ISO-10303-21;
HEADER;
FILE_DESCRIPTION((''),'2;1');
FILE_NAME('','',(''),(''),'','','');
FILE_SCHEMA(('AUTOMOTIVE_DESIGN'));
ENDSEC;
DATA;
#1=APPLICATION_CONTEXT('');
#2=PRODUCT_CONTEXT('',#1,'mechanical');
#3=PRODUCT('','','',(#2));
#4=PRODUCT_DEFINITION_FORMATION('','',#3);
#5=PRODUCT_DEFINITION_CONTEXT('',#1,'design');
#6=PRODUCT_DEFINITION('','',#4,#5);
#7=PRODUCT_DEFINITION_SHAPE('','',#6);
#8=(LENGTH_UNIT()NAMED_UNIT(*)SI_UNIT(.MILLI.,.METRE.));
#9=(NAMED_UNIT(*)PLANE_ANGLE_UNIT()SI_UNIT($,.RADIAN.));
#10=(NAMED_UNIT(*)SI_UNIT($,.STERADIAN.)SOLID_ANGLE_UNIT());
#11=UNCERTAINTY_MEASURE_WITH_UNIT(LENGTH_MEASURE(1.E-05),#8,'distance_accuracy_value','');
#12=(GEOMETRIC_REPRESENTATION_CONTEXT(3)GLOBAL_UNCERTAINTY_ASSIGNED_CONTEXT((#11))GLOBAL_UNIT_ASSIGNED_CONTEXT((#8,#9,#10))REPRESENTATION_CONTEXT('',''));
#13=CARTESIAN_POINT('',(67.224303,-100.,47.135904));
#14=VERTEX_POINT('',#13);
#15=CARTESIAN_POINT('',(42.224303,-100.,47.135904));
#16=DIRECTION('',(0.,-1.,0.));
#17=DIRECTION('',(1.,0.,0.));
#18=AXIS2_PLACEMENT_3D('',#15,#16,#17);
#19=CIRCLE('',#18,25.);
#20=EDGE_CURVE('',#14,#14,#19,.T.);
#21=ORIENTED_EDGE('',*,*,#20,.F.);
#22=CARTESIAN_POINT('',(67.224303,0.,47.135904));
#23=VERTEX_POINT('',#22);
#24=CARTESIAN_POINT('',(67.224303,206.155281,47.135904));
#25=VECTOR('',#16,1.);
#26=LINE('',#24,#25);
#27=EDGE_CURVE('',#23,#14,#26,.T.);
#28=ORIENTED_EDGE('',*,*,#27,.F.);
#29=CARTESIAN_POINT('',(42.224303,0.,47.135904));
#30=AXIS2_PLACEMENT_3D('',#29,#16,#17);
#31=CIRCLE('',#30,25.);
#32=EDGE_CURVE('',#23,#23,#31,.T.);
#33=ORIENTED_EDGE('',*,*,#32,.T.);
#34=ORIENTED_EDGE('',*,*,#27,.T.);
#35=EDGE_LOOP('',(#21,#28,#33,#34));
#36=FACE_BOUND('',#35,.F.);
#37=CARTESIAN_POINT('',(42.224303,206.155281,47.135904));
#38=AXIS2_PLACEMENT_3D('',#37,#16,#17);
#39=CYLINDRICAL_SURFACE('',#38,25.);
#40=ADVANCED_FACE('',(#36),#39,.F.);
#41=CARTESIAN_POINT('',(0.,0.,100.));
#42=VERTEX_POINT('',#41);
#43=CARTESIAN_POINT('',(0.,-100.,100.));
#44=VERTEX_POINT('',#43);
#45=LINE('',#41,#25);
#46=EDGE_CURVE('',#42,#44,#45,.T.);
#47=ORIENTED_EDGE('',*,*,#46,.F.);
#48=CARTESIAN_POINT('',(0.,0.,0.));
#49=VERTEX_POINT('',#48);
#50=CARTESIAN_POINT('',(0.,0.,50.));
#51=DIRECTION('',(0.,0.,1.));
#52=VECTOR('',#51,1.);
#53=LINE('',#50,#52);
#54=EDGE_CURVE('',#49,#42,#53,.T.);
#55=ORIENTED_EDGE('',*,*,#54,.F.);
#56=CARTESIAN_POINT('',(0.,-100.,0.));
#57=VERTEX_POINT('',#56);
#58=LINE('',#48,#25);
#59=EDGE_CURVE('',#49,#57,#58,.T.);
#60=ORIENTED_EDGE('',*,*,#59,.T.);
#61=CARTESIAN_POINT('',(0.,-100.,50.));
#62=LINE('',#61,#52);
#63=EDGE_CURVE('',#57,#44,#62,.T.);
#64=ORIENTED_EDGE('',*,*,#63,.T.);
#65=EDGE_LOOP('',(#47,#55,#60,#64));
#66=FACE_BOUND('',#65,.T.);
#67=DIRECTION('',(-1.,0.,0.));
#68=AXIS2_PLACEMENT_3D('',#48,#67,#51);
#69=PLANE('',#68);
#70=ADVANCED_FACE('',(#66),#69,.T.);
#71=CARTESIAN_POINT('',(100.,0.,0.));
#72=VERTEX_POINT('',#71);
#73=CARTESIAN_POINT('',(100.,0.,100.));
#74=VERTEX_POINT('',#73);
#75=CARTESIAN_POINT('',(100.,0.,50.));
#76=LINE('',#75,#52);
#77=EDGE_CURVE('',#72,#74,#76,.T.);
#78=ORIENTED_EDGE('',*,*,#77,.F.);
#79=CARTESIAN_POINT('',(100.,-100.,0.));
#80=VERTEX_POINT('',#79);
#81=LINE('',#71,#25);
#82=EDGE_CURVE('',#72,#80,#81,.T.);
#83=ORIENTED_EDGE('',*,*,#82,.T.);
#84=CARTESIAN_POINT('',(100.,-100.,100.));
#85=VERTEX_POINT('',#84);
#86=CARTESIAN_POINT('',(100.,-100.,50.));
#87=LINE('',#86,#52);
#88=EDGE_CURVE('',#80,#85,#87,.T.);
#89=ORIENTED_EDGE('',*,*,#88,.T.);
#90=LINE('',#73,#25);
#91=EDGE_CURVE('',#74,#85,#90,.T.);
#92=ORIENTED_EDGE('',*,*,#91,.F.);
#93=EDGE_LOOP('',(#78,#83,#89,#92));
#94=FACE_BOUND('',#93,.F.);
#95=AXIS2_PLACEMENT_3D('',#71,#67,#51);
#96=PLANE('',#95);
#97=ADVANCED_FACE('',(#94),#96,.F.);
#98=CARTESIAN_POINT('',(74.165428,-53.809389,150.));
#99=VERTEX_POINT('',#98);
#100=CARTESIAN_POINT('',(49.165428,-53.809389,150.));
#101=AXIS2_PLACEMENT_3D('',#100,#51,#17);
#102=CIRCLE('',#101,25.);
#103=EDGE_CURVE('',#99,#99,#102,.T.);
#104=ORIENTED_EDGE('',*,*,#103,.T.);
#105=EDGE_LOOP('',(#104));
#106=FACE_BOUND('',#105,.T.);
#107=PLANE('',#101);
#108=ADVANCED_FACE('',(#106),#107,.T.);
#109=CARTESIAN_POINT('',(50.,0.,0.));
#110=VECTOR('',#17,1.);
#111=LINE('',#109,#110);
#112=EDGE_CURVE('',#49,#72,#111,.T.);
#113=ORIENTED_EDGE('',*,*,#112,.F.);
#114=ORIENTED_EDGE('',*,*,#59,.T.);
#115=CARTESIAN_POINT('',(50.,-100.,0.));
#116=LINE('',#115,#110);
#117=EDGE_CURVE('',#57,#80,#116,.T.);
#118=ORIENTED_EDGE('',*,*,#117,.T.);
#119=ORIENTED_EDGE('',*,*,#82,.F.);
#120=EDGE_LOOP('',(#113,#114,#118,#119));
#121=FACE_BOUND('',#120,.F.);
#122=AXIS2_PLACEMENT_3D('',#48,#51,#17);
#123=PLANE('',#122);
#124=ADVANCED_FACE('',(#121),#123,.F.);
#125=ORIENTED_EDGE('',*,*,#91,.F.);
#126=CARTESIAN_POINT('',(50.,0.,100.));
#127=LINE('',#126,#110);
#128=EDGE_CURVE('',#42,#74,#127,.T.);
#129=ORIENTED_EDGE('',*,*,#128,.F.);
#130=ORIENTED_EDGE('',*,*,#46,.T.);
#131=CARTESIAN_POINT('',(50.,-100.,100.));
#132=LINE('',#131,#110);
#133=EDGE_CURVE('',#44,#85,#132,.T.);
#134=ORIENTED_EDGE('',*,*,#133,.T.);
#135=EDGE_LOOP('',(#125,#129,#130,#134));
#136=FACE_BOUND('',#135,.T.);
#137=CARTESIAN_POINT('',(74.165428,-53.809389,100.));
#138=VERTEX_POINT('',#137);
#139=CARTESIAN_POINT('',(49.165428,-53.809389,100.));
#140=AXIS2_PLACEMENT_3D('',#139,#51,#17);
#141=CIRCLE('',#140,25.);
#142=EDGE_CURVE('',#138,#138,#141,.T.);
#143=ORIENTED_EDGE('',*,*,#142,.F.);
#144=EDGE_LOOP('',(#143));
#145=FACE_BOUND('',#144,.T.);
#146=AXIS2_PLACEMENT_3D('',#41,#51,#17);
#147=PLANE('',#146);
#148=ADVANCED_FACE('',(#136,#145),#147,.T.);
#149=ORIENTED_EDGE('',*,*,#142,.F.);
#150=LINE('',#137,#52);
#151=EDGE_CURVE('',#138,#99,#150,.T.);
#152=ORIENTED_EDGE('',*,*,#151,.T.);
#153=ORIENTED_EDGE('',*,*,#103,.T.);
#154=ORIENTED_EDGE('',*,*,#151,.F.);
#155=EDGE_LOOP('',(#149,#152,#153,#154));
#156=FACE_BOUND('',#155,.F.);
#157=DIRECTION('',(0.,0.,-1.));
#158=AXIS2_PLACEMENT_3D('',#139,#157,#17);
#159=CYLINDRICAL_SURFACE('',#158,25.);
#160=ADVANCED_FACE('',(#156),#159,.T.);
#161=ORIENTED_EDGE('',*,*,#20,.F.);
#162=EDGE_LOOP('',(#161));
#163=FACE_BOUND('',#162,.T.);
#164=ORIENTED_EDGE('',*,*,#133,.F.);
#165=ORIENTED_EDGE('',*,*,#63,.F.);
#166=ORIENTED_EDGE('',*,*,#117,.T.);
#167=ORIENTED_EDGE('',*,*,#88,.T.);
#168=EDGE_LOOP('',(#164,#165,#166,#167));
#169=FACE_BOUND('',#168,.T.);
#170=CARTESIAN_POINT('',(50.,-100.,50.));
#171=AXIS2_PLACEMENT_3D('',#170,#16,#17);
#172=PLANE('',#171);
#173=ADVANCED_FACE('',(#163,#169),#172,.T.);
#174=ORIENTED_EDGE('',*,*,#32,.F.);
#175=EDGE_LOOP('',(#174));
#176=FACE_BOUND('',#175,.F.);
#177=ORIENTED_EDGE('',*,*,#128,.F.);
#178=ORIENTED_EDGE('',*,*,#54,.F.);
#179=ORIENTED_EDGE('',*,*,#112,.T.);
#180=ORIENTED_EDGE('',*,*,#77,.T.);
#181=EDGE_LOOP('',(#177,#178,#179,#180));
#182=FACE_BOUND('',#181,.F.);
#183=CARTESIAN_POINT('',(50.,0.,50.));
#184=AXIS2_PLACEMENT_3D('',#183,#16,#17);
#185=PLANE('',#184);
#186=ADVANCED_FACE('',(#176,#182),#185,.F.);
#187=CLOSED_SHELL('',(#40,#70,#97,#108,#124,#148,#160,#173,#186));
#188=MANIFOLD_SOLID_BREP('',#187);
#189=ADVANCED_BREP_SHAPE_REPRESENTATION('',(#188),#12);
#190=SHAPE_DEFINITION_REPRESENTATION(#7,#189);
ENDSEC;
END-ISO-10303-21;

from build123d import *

# Parameters (mm, degrees)
F0_W     = 100
F0_H     = 100
F1_DEPTH = 100
F4_R     = 25
F5_DEPTH = 50
F8_D     = 50


# Not quite as in the source:
# - the program builds the solid bodies; features that only make, move or delete a surface that nothing else refers to are left out


with BuildPart() as f1:
    # F0 (on Front) → F1 (new body)
    with BuildSketch(Plane.XZ):
        with Locations((50, 50)):
            Rectangle(F0_W, F0_H)
    extrude(amount=F1_DEPTH)

    # F4 (on face) → F5 (join)
    with BuildSketch(Plane.XY.offset(100)):
        with Locations((49.1654276848, -53.809389472)):
            Circle(F4_R)
    extrude(amount=F5_DEPTH)

    # F8 (through all)
    with Locations(Plane(origin=(0, 0, 0), x_dir=(-1, 0, 0), z_dir=(0, 1, 0))):
        with Locations((-42.2243028879, 47.1359044313)):
            Hole(F8_D / 2)


solid = f1.part
